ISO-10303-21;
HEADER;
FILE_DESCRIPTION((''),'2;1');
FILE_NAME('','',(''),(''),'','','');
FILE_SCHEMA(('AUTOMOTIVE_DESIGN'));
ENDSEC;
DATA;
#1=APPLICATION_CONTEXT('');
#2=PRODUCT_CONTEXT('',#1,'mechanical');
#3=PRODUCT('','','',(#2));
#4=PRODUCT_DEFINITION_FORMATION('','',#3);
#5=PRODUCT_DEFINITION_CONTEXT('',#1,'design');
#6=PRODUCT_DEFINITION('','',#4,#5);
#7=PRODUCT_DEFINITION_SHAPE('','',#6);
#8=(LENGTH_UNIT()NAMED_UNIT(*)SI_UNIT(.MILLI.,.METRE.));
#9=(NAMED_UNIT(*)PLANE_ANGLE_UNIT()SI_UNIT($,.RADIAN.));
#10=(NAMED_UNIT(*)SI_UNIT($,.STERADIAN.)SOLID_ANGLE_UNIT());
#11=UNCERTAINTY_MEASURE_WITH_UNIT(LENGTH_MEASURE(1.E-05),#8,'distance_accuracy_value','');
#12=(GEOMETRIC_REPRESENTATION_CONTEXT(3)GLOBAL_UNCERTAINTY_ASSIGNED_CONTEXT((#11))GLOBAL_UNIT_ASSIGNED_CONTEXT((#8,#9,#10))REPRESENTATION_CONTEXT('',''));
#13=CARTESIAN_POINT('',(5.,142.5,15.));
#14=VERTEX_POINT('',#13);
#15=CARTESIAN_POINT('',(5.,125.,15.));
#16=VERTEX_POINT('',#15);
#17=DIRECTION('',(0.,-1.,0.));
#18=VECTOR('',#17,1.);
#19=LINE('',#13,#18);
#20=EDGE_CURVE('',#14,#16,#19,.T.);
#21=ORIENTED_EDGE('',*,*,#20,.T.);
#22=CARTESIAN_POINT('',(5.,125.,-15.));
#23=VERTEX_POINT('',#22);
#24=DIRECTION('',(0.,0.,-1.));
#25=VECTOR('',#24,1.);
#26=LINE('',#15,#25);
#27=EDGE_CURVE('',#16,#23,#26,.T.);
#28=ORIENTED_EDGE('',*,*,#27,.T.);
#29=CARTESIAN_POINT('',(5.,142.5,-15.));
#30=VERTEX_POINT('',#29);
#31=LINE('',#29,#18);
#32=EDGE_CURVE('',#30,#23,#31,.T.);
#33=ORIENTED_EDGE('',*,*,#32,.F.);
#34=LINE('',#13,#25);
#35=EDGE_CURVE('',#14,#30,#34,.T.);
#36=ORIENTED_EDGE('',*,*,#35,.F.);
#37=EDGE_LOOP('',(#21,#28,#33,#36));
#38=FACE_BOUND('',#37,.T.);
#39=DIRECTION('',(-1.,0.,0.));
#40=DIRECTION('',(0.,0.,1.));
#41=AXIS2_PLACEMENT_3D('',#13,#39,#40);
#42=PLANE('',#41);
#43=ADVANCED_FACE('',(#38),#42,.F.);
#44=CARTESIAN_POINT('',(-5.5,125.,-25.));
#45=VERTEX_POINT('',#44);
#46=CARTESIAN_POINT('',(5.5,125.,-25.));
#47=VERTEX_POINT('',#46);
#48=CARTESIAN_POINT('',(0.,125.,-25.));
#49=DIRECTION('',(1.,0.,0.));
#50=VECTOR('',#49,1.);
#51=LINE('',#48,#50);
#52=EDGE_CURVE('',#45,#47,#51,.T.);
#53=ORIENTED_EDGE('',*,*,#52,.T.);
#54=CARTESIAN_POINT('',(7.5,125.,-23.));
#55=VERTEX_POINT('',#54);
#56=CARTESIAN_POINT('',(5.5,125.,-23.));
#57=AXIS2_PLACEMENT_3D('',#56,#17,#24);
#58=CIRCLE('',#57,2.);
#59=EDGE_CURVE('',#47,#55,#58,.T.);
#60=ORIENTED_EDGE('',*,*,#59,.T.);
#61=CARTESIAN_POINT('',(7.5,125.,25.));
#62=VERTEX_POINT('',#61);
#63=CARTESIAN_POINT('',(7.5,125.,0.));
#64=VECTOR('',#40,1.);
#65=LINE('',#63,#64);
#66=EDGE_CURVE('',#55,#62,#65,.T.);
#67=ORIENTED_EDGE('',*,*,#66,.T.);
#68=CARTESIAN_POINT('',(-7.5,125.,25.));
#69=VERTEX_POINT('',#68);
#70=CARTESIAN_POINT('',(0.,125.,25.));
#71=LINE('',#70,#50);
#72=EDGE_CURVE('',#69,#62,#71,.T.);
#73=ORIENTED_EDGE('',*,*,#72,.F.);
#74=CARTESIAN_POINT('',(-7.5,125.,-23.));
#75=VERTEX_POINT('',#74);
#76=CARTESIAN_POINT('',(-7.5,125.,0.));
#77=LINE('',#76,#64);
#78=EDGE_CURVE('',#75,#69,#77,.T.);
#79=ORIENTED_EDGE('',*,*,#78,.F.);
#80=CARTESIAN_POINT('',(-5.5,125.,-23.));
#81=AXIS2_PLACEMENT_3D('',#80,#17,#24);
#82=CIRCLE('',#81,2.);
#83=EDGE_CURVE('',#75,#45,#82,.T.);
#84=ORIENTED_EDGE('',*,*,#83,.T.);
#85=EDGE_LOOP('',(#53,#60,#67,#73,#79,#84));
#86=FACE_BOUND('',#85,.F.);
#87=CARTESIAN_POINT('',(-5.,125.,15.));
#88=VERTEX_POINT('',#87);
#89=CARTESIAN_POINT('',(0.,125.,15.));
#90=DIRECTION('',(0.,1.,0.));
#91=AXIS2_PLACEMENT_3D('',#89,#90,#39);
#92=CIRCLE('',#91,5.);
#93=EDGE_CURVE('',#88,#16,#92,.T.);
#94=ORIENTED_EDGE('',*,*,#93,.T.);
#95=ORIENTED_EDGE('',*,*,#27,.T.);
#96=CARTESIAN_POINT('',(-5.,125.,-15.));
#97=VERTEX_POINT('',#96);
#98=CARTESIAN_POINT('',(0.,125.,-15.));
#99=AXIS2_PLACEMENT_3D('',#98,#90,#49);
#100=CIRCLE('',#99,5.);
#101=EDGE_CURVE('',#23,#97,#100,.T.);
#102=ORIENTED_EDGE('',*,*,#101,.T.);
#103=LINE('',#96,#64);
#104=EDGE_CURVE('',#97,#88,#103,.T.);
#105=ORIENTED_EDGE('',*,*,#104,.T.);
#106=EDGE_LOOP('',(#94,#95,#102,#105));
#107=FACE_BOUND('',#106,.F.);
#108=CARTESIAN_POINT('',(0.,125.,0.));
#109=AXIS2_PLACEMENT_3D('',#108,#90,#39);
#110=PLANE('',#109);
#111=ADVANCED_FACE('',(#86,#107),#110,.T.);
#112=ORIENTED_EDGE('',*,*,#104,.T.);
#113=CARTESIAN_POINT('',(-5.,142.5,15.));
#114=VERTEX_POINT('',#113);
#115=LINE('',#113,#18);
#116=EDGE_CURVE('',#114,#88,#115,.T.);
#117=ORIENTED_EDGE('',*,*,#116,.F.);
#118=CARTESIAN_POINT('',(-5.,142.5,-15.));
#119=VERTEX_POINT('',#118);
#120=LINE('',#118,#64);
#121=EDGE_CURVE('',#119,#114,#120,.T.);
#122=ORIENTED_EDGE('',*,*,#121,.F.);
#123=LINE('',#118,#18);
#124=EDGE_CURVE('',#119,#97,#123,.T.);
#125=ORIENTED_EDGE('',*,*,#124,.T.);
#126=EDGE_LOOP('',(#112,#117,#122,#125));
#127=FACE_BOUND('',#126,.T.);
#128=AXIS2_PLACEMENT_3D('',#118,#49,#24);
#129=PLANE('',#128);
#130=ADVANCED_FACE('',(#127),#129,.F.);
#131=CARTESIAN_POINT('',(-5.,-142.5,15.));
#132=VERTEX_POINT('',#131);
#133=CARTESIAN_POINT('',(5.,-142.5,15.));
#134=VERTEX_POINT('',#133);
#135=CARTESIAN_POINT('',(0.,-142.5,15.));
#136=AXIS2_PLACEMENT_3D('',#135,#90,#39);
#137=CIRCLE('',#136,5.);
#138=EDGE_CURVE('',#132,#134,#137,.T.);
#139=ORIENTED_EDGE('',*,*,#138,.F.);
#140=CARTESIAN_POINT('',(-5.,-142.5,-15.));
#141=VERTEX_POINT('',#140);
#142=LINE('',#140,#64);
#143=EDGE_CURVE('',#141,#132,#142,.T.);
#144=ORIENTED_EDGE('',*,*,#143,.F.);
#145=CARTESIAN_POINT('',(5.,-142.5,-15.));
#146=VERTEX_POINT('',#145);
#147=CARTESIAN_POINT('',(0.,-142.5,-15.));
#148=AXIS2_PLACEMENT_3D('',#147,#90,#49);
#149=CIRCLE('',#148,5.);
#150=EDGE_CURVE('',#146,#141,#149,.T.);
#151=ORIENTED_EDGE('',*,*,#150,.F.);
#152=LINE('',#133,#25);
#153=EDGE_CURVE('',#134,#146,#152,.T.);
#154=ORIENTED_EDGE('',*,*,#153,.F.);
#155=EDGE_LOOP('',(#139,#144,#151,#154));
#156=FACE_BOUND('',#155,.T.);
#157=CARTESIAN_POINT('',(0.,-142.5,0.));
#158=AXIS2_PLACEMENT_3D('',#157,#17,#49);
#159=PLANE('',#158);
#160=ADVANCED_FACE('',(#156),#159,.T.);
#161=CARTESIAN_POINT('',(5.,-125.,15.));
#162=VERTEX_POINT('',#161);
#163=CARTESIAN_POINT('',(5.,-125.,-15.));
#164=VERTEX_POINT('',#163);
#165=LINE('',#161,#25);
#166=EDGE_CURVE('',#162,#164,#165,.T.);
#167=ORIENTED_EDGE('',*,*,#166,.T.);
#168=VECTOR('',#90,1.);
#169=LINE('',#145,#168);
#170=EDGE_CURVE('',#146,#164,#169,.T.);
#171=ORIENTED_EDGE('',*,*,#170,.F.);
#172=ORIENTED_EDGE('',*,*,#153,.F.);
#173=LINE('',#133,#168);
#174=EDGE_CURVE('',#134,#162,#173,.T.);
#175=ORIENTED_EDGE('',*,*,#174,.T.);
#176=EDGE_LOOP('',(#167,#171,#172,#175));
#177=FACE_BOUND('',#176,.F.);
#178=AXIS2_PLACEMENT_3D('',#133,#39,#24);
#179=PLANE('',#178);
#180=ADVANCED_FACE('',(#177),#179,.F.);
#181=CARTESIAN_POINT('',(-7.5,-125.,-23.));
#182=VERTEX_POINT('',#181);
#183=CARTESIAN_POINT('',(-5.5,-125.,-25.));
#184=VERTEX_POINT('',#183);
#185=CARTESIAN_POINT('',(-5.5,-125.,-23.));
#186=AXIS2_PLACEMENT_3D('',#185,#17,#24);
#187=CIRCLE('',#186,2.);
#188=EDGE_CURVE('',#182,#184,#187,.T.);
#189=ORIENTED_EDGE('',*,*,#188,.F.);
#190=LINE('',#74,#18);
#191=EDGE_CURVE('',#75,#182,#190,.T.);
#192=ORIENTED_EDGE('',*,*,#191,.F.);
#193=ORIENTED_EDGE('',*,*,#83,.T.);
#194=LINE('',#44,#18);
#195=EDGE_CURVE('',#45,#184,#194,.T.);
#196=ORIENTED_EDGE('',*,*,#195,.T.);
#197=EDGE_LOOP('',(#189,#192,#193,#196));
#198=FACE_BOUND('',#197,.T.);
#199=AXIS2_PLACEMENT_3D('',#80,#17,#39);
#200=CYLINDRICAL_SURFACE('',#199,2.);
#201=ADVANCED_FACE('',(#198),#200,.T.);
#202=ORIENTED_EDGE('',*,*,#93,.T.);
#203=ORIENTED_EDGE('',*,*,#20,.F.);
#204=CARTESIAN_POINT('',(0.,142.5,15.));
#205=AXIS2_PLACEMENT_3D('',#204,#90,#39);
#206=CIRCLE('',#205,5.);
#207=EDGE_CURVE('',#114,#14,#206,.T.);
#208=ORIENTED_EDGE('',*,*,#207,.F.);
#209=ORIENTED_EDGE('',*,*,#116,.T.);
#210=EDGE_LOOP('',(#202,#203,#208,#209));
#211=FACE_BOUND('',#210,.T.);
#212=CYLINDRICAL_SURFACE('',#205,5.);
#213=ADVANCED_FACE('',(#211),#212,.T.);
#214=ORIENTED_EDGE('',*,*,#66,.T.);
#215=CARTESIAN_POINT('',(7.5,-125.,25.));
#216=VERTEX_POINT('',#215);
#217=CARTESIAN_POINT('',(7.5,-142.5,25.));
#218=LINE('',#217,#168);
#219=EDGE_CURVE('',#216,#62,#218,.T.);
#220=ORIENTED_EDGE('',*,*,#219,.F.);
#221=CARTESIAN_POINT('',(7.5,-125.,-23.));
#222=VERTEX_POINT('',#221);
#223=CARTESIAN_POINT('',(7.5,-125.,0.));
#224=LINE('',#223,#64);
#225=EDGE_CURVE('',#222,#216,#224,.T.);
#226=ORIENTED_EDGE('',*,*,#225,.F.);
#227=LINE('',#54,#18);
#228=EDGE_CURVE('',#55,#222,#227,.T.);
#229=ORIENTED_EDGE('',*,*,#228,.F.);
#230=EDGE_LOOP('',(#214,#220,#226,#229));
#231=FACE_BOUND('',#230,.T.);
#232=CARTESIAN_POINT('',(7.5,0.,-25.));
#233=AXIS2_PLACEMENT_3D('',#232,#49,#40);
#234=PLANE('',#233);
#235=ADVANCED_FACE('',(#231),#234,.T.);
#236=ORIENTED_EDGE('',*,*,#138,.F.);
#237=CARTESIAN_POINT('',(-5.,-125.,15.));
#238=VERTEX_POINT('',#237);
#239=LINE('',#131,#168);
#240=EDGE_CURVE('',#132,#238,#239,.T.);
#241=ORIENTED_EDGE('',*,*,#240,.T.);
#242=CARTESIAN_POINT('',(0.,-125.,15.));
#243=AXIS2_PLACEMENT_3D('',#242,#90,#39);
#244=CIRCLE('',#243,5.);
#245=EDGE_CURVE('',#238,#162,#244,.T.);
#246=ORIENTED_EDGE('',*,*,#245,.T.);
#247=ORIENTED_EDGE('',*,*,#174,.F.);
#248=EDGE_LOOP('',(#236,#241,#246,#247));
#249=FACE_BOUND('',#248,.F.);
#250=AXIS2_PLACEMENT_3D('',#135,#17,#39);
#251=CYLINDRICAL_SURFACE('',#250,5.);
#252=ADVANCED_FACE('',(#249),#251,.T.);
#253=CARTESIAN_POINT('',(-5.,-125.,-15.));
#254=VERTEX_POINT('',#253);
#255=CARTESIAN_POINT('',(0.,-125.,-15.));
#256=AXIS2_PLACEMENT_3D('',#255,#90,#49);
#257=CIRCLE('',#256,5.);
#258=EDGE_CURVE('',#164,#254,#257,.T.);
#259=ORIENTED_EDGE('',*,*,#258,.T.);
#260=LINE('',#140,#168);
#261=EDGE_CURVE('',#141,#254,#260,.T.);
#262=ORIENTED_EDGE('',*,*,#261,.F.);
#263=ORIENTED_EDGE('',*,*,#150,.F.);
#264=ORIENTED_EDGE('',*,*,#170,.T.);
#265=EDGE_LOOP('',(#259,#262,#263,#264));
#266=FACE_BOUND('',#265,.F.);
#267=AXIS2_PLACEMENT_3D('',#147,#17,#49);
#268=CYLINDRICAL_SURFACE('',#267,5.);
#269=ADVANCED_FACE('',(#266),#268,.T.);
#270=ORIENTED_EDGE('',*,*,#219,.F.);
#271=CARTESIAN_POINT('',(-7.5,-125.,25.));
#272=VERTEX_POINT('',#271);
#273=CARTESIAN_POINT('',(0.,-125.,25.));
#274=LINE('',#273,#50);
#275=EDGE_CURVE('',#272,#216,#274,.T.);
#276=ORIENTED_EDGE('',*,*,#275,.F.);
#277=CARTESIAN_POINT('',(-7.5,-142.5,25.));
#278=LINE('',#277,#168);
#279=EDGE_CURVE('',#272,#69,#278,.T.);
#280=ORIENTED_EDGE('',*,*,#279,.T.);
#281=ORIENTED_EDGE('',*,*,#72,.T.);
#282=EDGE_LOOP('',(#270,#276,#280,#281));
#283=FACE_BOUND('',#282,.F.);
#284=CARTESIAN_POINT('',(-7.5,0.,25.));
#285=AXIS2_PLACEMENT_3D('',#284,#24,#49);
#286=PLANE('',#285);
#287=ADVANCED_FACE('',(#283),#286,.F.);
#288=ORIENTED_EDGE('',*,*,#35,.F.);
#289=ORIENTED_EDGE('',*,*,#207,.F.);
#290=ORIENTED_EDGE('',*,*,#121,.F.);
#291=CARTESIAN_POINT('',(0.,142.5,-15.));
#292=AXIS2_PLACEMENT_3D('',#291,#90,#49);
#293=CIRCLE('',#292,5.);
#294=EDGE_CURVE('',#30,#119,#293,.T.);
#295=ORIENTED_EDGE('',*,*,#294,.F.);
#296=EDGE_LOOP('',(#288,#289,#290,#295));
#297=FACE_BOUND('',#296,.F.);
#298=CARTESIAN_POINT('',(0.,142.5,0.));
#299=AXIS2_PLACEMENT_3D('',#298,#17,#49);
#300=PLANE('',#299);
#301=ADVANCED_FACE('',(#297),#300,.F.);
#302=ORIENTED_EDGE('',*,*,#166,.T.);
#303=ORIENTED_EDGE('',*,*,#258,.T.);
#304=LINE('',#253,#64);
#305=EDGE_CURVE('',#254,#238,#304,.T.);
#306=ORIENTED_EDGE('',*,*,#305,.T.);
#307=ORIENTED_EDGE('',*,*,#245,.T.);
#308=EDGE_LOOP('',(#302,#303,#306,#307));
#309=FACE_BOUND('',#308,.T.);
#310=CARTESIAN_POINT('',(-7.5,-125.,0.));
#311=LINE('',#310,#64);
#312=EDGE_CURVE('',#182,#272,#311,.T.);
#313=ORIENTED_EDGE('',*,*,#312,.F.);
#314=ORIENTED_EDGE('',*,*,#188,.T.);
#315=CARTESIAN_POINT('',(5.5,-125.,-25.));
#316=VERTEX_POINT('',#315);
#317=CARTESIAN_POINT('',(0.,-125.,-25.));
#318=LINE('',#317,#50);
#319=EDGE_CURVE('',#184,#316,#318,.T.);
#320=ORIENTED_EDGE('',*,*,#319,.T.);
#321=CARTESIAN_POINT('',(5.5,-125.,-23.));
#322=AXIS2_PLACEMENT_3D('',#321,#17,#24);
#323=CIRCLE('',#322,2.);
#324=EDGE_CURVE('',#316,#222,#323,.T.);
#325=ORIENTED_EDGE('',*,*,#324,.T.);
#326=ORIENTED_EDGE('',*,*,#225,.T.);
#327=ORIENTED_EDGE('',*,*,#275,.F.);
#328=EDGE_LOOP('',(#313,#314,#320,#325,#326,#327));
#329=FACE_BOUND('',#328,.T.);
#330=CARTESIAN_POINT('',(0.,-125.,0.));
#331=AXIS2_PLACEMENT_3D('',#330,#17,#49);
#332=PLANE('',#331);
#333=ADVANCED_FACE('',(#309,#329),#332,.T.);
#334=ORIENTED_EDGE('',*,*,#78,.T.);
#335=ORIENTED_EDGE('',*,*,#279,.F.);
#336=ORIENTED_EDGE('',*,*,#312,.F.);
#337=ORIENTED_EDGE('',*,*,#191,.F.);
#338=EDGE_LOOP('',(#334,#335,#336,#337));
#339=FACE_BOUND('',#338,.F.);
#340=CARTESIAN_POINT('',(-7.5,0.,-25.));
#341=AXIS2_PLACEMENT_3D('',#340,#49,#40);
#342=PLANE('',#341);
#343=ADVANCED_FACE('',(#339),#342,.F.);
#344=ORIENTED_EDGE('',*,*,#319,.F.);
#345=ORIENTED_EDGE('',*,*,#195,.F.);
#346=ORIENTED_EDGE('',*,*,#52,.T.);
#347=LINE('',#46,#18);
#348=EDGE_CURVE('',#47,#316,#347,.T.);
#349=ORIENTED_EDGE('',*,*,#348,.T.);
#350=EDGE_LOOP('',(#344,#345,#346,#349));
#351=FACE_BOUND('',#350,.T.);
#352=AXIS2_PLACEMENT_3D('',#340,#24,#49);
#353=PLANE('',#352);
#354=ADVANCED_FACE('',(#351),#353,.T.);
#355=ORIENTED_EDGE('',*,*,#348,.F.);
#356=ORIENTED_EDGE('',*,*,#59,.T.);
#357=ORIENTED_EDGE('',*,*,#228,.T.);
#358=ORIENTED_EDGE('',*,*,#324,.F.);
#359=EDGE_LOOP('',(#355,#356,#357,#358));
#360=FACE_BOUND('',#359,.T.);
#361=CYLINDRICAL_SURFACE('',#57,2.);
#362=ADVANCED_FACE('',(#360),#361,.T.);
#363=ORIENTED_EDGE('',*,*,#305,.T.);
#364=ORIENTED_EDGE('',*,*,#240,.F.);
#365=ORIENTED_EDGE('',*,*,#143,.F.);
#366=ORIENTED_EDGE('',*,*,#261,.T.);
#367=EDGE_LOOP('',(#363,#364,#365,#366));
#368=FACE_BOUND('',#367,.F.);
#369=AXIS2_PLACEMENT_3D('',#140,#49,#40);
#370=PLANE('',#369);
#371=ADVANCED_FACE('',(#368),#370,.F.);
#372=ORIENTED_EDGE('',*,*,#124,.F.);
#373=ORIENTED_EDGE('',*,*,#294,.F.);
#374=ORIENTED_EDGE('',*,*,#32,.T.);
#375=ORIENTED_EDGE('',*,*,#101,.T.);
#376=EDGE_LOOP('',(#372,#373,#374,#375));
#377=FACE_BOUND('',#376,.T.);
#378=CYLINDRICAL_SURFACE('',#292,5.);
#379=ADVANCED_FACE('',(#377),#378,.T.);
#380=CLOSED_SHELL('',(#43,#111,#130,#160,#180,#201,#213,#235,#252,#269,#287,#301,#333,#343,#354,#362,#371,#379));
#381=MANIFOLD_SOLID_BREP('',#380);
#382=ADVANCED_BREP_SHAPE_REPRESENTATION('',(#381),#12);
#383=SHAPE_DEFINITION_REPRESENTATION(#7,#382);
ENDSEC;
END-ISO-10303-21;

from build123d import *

# Parameters (mm, degrees)
F0_W          = 15
F0_H          = 50
F1_DEPTH      = 142.5
F1_DEPTH_BACK = 142.5
F2_W          = 15
F2_H          = 50
F3_DEPTH      = 17.5
F4_R          = 2


# Not quite as in the source:
# - a pattern or mirror of a feature is missing from the dataset's text; its kind, count and spacing are read off the source's solid


with BuildPart() as f1:
    # F0 (on Front) → F1 (new body, two sides)
    with BuildSketch(Plane.XZ) as f1_sk:
        Rectangle(F0_W, F0_H)
    extrude(amount=F1_DEPTH)
    extrude(f1_sk.sketch, amount=-F1_DEPTH_BACK)

    # F2 (on face) → F3 (cut)
    with BuildSketch(Plane.XZ.offset(142.5)):
        Rectangle(F2_W, F2_H)
        with BuildLine():
            ThreePointArc((5, -15), (0, -20), (-5, -15))
            Line((-5, -15), (-5, 15))
            ThreePointArc((-5, 15), (0, 20), (5, 15))
            Line((5, 15), (5, -15))
        make_face(mode=Mode.SUBTRACT)
    f3 = extrude(amount=-F3_DEPTH, mode=Mode.SUBTRACT)

    # F3_copies: F3 across plane
    add(f3.mirror(Plane.ZX), mode=Mode.SUBTRACT)

    # F4
    f4_edges = [f1.edges().sort_by_distance(p)[0] for p in [
        (7.5, 0, -25),
        (-7.5, 0, -25),
    ]]
    fillet(f4_edges, radius=F4_R)


solid = f1.part
